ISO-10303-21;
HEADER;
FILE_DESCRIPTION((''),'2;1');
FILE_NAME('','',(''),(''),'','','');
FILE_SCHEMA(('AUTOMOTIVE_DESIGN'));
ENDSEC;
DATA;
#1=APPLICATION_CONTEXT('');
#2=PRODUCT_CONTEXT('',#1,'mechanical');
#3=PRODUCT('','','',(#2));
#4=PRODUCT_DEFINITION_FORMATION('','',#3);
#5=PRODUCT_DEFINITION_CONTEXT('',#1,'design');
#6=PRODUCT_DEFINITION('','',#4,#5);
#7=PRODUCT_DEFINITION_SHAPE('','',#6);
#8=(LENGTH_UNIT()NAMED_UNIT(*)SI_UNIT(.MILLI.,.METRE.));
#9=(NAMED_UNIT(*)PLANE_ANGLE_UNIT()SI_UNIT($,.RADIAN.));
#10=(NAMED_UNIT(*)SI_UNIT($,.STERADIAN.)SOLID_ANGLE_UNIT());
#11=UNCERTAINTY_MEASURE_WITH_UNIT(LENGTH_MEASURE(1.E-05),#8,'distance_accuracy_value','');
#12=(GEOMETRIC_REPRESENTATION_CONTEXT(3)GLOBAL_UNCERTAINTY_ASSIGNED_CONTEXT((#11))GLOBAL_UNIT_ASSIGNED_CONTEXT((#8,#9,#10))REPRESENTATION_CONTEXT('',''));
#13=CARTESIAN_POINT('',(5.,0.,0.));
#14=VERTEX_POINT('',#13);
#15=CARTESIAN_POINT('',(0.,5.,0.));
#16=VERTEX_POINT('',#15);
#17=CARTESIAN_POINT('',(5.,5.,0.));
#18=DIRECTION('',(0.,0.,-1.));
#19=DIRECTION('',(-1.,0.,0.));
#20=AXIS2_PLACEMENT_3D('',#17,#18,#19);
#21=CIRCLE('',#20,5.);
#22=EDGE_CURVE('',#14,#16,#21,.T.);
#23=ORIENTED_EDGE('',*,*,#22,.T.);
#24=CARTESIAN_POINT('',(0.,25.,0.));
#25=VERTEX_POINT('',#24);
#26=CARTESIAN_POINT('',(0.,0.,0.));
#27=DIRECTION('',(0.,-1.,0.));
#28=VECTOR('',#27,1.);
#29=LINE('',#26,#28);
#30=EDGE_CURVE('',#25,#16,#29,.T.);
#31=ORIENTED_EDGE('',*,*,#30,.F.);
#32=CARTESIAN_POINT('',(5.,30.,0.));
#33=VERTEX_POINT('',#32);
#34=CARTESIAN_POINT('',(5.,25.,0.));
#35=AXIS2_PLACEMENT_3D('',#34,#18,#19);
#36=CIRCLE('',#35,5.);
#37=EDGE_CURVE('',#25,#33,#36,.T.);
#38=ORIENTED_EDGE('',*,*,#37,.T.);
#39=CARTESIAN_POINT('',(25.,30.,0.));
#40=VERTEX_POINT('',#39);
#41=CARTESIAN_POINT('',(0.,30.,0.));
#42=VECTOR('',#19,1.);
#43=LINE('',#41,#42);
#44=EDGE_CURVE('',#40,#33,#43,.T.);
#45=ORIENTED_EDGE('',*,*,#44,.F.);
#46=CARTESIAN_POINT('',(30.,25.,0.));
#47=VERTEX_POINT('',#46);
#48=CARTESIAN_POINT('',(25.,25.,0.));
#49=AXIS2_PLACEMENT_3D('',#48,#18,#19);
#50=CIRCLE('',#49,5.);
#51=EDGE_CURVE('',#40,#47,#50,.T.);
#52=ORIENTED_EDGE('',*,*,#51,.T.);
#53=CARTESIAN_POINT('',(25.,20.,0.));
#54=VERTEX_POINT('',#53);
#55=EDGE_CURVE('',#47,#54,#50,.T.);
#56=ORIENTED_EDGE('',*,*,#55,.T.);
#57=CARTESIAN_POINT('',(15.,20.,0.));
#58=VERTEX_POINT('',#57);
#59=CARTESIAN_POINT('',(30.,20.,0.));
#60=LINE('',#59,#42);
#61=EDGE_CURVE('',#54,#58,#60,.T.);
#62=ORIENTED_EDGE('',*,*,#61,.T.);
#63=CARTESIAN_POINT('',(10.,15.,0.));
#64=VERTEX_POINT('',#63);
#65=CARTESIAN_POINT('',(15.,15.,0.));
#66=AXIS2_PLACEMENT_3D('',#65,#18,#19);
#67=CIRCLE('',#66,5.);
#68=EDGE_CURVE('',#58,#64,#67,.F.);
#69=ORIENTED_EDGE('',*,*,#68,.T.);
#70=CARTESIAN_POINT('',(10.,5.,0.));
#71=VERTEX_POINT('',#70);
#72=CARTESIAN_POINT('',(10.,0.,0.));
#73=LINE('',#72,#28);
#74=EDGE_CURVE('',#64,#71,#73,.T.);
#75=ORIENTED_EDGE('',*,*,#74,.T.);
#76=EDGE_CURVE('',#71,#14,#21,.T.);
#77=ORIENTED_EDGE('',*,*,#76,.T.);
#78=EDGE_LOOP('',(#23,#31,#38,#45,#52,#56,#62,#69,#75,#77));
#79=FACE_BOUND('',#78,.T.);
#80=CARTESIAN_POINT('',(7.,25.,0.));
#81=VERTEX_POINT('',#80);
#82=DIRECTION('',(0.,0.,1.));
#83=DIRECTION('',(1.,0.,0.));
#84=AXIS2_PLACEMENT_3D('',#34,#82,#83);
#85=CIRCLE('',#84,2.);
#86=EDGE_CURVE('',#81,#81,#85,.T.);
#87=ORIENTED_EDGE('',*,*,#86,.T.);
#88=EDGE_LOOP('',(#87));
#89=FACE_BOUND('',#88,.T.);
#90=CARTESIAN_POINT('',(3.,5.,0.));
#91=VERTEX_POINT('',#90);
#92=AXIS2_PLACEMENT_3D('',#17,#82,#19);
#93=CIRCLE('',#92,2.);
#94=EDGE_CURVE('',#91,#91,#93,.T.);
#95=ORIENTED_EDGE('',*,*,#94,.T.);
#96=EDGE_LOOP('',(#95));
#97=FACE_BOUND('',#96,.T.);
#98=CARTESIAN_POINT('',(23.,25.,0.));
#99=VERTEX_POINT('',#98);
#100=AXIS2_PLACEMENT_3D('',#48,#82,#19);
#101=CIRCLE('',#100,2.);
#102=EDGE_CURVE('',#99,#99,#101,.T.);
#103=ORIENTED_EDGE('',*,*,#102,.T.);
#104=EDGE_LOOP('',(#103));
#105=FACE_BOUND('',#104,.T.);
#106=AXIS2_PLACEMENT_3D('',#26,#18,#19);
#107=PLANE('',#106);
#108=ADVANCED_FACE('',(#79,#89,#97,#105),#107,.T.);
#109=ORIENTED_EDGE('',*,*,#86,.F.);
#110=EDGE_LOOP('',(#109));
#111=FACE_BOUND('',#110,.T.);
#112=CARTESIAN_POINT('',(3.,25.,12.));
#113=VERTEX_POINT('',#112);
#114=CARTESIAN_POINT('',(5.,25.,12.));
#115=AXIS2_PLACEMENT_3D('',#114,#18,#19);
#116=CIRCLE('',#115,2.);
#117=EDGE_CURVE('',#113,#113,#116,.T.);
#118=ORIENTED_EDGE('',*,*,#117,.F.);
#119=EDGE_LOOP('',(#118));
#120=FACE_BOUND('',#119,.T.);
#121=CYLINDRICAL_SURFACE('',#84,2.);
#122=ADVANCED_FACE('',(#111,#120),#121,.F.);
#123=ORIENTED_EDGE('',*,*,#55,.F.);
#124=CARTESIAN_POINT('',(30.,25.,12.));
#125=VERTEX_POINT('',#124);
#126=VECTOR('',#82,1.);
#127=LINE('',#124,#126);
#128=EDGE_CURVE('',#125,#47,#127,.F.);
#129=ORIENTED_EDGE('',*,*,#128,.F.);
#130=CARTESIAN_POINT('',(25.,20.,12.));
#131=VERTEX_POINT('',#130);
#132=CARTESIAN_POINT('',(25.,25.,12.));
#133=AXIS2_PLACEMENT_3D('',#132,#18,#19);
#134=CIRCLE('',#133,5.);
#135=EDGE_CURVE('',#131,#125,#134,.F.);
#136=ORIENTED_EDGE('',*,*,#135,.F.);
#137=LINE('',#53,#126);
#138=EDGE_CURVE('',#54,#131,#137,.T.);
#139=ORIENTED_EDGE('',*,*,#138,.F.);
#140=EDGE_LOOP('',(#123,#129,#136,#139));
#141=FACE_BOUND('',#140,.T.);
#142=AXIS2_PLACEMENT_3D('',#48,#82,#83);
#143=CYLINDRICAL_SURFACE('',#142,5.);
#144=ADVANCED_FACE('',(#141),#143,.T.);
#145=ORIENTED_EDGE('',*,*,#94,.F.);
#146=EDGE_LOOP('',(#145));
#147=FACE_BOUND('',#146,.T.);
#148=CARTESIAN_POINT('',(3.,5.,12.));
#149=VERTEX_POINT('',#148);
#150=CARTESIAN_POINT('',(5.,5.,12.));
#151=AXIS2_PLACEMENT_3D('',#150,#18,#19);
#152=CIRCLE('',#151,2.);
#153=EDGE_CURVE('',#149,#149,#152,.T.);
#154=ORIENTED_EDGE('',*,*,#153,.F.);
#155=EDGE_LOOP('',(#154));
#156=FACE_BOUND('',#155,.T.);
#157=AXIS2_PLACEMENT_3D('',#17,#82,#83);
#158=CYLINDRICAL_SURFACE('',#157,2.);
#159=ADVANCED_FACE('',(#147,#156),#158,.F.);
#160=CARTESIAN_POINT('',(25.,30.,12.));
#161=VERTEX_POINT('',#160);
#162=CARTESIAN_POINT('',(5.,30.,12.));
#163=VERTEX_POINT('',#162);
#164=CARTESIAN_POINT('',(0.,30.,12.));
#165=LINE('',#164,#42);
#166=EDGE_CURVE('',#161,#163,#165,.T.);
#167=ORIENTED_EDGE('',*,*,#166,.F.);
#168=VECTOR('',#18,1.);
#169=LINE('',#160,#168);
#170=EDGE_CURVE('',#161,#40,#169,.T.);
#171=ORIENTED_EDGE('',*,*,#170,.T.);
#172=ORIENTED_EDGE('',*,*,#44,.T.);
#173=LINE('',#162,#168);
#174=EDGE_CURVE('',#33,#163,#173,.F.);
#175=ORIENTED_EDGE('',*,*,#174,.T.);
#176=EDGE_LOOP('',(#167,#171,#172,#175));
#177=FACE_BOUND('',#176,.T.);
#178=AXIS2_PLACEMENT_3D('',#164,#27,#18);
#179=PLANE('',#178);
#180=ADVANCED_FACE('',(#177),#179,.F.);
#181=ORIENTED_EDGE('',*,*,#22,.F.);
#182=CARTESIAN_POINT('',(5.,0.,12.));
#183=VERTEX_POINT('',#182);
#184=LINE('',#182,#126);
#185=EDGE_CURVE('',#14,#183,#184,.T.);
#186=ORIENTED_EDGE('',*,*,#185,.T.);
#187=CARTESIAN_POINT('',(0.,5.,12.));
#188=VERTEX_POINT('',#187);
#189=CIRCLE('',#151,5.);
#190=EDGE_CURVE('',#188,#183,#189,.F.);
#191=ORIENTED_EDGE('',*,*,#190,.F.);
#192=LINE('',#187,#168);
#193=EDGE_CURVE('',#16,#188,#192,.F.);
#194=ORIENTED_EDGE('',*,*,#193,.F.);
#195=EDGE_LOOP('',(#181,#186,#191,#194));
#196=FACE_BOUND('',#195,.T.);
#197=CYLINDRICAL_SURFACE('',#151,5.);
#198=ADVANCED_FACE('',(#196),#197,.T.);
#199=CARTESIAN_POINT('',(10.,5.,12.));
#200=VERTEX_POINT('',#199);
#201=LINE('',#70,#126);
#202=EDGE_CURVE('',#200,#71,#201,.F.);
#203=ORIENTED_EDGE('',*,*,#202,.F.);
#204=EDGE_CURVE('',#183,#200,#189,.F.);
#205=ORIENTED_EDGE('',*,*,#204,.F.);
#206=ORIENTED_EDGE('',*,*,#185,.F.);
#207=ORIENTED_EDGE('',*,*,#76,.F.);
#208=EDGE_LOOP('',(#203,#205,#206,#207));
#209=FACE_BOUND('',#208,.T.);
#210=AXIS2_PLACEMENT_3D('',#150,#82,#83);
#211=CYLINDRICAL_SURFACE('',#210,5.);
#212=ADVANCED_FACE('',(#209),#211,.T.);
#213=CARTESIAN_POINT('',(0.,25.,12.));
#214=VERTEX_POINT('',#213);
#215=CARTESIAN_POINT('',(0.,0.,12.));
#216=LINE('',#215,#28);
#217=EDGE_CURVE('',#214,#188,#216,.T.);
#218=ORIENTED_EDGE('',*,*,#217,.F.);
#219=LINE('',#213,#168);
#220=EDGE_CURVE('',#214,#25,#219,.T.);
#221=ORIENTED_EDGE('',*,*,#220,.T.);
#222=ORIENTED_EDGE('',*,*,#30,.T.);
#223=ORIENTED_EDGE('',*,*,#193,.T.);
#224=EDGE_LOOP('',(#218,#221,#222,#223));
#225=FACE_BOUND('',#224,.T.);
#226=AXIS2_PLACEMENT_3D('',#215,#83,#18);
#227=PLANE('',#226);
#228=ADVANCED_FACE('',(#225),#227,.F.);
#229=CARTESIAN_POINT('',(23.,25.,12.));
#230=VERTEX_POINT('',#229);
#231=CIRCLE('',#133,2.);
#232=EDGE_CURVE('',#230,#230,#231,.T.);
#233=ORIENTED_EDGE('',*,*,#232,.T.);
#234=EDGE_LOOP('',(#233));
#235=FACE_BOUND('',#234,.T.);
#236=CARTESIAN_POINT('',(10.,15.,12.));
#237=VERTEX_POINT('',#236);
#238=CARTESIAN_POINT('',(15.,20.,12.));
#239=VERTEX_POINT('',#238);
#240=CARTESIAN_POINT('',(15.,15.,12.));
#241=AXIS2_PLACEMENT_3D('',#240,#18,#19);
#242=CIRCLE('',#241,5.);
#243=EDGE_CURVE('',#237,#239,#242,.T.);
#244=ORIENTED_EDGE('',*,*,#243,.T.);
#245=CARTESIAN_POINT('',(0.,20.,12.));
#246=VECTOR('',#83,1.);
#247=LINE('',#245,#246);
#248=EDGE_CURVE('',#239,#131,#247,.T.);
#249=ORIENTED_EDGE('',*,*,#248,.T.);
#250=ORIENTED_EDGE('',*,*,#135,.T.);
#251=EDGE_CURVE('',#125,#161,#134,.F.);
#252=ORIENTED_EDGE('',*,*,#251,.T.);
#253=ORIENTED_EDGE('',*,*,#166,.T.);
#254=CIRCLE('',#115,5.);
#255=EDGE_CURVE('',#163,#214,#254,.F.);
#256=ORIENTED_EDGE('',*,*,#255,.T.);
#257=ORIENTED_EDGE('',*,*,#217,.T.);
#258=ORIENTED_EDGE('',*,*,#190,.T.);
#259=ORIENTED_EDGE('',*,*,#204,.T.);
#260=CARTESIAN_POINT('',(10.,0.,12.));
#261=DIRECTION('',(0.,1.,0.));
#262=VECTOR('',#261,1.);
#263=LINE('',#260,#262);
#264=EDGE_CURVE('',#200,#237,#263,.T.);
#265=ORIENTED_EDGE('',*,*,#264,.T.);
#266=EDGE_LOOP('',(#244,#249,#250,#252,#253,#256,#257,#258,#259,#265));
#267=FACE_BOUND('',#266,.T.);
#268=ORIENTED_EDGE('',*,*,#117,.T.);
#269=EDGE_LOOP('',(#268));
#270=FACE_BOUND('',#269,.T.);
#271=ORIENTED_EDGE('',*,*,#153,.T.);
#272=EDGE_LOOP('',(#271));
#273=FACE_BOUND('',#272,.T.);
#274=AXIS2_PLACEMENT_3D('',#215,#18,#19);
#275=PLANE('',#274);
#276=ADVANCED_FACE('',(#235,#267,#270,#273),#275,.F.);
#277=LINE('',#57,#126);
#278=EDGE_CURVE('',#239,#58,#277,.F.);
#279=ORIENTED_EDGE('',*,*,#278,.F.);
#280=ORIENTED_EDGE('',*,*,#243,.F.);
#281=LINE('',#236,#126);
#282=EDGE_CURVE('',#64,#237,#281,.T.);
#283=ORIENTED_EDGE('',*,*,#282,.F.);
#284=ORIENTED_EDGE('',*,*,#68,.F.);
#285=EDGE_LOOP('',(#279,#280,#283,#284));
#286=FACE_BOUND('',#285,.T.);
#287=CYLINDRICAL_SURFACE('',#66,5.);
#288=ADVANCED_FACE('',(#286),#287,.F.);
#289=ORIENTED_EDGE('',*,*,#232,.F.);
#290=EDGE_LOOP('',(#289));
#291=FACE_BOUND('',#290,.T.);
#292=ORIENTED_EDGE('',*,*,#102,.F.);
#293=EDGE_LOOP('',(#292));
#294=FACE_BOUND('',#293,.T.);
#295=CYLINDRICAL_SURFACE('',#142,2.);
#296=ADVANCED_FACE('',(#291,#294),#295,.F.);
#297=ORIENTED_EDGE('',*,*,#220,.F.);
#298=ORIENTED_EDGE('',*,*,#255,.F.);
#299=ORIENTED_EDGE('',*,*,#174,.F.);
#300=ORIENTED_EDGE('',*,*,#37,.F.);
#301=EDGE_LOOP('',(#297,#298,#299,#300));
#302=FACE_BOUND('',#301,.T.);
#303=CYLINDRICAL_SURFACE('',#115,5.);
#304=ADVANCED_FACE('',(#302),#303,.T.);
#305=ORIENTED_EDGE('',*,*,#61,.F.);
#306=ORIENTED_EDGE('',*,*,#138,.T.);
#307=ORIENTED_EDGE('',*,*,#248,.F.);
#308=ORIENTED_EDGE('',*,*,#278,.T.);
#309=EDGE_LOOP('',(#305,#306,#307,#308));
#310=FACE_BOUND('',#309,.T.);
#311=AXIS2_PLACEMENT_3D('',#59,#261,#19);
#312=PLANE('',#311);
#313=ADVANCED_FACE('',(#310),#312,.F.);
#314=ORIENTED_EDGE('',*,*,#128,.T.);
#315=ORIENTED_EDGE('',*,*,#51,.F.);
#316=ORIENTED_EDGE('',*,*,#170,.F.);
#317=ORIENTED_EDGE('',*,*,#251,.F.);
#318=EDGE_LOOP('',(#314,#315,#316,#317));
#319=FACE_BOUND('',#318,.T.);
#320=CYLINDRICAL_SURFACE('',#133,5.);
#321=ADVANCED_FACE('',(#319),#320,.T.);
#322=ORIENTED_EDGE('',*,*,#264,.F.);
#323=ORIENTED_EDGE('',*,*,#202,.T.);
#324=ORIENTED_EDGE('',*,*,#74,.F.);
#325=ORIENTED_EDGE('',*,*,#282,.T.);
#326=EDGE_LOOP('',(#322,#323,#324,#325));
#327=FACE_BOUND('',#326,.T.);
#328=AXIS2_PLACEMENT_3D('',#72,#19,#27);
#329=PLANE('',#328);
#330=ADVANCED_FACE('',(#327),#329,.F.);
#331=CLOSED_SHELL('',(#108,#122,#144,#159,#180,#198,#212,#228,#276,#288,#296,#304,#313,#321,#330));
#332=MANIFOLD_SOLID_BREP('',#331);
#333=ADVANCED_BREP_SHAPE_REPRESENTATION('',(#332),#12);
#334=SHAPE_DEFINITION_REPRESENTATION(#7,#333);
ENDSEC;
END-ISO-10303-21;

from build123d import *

# Parameters (mm, degrees)
ESQUISSE1_W                  = 30
ESQUISSE1_H                  = 30
BOSS_EXTRU_1_DEPTH           = 12
ENL_V_MAT_EXTRU_1_DEPTH      = 45.09081537
ENL_V_MAT_EXTRU_1_DEPTH_BACK = 45.09081537
ESQUISSE2_R                  = 2
ENL_V_MAT_EXTRU_2_DEPTH      = 45.09081537
ENL_V_MAT_EXTRU_2_DEPTH_BACK = 45.09081537
ESQUISSE3_W                  = 20
ESQUISSE3_H                  = 20
CONG_1_R                     = 5


with BuildPart() as part:
    # Esquisse1 → Boss.-Extru.1 (new body)
    with BuildSketch(Plane.XY):
        with Locations((15, 15)):
            Rectangle(ESQUISSE1_W, ESQUISSE1_H)
    extrude(amount=BOSS_EXTRU_1_DEPTH)

    # Esquisse2 → Enlèv. mat.-Extru.1 (cut, two sides: drawn at the far end of the back side and taken through both)
    with BuildSketch(Plane.XY.offset(12).offset(-ENL_V_MAT_EXTRU_1_DEPTH_BACK)):
        with Locations((5, 25)):
            Circle(ESQUISSE2_R)
        with Locations(Location((25, 25, 0), (0, 0, 180))):
            Circle(ESQUISSE2_R)
        with Locations((25, 5)):
            Circle(ESQUISSE2_R)
        with Locations(Location((5, 5, 0), (0, 0, 180))):
            Circle(ESQUISSE2_R)
    extrude(amount=ENL_V_MAT_EXTRU_1_DEPTH + ENL_V_MAT_EXTRU_1_DEPTH_BACK, mode=Mode.SUBTRACT)

    # Esquisse3 → Enlèv. mat.-Extru.2 (cut, two sides: drawn at the far end of the back side and taken through both)
    with BuildSketch(Plane.XY.offset(12).offset(-ENL_V_MAT_EXTRU_2_DEPTH_BACK)):
        with Locations((20, 10)):
            Rectangle(ESQUISSE3_W, ESQUISSE3_H)
    extrude(amount=ENL_V_MAT_EXTRU_2_DEPTH + ENL_V_MAT_EXTRU_2_DEPTH_BACK, mode=Mode.SUBTRACT)

    # Congé1
    cong_1_edges = [part.edges().sort_by_distance(p)[0] for p in [
        (10, 20, 6),
        (0, 30, 6),
        (0, 0, 6),
        (10, 0, 6),
        (30, 30, 6),
        (30, 20, 6),
    ]]
    fillet(cong_1_edges, radius=CONG_1_R - 0.0001)  # a hair under: the kernel refuses the full size


solid = part.part
